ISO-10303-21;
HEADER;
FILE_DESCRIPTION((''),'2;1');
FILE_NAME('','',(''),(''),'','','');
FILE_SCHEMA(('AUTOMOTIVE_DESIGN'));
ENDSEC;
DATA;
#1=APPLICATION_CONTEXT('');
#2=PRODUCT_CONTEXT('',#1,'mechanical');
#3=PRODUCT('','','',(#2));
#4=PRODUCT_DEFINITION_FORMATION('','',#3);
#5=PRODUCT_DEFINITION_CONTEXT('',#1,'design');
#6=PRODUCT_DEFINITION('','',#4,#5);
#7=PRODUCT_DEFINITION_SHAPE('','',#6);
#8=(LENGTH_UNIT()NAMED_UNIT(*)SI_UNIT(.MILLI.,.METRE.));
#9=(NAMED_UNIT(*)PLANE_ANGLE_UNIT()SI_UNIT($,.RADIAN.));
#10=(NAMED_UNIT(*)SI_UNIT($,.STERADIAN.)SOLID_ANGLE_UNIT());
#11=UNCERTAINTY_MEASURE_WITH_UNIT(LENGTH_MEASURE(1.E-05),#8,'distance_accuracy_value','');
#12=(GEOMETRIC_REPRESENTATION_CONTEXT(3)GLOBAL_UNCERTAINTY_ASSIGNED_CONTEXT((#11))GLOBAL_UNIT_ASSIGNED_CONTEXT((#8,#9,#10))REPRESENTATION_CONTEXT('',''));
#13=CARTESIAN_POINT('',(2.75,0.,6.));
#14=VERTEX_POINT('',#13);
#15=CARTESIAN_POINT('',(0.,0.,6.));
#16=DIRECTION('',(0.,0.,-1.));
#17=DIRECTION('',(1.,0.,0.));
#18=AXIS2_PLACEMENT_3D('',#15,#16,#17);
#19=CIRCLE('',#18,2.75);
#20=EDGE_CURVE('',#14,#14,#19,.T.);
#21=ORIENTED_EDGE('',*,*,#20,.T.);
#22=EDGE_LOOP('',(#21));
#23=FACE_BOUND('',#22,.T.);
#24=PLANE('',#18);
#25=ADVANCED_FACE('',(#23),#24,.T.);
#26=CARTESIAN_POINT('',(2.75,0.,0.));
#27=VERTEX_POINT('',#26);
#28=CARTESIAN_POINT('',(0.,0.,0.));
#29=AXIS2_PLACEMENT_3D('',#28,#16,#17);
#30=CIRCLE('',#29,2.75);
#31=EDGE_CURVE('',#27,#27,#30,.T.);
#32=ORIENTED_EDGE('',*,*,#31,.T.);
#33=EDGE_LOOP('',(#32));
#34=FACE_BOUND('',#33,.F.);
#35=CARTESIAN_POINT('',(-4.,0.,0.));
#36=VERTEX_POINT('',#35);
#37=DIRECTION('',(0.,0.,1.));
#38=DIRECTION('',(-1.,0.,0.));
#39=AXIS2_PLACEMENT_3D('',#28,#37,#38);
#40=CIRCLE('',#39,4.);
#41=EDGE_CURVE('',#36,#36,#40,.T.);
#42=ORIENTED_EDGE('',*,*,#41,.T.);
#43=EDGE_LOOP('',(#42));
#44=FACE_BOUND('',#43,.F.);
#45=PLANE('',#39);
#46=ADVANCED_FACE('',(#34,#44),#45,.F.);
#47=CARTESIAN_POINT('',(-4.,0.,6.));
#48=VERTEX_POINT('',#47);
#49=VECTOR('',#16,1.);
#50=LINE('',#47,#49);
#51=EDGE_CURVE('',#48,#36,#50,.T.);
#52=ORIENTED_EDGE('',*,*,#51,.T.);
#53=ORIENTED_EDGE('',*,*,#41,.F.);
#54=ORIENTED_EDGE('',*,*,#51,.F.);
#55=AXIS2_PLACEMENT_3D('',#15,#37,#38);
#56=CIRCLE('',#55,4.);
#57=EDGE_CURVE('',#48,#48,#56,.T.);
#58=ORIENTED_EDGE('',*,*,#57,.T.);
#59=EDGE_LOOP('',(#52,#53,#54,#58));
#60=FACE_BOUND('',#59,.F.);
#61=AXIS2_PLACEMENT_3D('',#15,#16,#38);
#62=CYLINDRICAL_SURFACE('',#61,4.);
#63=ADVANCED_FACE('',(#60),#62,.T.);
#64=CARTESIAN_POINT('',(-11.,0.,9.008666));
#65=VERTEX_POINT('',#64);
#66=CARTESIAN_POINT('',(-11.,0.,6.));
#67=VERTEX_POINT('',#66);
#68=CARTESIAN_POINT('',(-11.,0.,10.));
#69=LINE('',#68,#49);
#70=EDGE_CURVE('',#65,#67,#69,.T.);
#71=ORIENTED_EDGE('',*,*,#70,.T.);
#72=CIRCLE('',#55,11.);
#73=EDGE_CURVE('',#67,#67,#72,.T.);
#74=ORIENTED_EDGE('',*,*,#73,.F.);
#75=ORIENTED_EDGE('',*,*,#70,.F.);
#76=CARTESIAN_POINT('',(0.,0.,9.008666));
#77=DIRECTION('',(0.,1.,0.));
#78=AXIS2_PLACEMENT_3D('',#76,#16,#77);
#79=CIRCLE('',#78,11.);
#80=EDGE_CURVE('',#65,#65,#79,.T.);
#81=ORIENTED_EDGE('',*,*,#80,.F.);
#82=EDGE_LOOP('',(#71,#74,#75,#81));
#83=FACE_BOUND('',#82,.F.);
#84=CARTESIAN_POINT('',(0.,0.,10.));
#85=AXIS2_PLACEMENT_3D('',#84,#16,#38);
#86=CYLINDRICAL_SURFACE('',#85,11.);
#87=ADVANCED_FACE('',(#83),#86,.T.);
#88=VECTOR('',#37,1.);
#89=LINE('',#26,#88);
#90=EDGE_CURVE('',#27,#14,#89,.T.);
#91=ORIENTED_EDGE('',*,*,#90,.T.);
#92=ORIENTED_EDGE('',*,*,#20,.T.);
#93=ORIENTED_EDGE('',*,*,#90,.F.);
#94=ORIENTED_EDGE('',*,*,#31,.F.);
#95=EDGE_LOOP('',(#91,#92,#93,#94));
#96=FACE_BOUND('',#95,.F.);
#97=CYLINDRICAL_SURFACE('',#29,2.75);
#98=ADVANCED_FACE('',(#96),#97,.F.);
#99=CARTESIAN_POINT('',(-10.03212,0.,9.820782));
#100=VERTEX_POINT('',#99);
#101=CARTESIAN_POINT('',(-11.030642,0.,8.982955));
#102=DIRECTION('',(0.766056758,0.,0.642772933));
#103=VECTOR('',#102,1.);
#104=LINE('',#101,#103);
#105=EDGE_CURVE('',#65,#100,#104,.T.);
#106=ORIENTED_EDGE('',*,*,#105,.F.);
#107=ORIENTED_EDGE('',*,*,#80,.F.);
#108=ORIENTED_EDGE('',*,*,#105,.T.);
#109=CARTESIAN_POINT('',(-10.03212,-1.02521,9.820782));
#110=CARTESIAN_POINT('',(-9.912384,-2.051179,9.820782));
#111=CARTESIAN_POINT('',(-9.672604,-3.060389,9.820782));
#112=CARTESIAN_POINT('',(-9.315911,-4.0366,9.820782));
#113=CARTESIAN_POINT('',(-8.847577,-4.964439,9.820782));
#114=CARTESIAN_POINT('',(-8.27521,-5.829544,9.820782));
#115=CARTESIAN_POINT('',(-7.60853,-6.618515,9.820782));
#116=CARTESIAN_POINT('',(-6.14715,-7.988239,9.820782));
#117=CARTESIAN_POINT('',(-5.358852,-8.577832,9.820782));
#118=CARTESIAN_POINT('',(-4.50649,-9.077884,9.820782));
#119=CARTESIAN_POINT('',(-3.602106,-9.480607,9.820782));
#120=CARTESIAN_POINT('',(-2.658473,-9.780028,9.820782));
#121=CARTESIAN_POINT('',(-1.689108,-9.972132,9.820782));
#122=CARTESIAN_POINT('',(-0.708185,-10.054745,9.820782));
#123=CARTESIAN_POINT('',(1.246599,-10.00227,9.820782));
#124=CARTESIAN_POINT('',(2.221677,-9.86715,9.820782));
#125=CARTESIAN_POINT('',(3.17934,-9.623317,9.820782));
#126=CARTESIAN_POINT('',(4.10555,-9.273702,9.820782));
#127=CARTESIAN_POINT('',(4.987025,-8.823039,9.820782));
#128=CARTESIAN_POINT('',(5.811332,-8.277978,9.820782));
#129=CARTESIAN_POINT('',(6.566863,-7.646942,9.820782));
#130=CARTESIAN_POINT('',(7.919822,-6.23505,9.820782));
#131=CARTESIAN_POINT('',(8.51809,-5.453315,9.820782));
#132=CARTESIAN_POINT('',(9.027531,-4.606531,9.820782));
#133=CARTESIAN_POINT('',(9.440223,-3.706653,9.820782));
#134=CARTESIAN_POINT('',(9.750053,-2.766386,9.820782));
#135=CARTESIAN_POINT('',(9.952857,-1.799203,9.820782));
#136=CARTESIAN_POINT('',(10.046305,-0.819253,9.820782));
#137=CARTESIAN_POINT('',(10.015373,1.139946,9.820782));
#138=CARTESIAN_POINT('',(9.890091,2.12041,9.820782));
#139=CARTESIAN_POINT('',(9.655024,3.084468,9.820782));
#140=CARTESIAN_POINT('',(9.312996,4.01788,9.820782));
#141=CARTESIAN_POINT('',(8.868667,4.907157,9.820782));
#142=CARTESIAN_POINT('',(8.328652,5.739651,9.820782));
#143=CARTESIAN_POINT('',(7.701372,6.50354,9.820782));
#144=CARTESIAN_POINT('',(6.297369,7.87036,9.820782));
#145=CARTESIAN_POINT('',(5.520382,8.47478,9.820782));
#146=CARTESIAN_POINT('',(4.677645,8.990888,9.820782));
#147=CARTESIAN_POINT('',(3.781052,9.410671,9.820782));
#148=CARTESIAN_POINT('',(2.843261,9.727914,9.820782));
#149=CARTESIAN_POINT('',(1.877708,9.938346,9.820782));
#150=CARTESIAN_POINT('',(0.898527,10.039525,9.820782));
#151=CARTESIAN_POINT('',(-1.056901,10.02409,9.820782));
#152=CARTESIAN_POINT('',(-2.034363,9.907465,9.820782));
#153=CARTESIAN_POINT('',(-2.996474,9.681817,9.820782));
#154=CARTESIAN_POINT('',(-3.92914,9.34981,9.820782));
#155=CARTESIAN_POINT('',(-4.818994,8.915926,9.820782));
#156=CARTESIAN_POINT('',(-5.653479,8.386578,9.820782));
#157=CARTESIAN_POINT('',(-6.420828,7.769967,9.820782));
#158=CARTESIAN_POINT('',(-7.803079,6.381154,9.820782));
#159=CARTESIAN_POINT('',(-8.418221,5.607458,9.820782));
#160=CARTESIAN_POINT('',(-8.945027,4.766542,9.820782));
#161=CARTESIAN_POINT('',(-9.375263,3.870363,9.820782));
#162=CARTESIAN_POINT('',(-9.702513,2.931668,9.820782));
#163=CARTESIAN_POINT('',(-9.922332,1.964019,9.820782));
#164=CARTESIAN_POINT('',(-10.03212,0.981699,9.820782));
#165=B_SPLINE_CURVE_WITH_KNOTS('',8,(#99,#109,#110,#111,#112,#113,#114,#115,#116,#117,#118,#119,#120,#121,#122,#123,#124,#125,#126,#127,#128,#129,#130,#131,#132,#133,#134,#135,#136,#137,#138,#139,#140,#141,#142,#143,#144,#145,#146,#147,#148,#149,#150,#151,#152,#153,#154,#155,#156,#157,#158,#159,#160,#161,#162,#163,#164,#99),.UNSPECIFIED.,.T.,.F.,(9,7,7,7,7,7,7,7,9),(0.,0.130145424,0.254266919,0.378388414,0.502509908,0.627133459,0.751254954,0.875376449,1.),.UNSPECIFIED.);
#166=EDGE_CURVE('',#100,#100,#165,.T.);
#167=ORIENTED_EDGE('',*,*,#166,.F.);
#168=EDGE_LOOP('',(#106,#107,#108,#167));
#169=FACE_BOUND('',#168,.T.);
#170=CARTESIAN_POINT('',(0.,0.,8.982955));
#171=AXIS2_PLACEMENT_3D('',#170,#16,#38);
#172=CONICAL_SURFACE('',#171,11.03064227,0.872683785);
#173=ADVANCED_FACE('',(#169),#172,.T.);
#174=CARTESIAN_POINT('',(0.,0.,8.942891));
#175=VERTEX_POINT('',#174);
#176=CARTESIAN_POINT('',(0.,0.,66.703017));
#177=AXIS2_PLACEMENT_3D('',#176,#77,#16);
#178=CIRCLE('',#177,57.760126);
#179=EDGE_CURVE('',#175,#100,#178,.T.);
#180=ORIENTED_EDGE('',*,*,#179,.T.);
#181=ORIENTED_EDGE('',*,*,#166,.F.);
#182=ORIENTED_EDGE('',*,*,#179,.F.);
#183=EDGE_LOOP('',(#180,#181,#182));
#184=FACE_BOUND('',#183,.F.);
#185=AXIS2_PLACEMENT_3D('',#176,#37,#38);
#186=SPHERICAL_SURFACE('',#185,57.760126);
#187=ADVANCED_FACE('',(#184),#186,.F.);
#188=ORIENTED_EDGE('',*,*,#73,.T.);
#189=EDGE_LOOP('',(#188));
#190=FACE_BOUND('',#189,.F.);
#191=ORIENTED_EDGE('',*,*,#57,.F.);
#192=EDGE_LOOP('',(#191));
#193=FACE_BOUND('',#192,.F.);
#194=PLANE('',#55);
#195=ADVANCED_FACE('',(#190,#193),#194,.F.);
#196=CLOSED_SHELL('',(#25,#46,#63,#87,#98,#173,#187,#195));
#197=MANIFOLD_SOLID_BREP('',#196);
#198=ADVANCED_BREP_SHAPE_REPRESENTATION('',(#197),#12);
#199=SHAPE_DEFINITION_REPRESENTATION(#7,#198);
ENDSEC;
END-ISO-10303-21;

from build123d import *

# Parameters (mm, degrees)
F3_R     = 2.75
F4_DEPTH = 6


# Not quite as in the source:
# - a fillet or chamfer that OpenCascade refuses, or shapes differently, is made with other operations: its cross-section is extruded or revolved along the edge and cut away or added


with BuildPart() as f1:
    # F0 (on Front) → F1 (revolve)
    with BuildSketch(Plane.XZ):
        with BuildLine():
            Line((-4, 6), (-4, 0))
            Line((-4, 0), (0, 0))
            Line((0, 0), (0, 8.9428911653))
            ThreePointArc((0, 8.9428911653), (-5.525338883, 9.2077757466), (-11, 10))
            Line((-11, 10), (-11, 6))
            Line((-11, 6), (-4, 6))
        make_face()
    revolve(axis=Axis((0, 0, 4.4714455826), (0, 0, 1)))

    # F2: chamfer of 1 on 1 edges, made by hand

    # F2_s1 → F2_t2 (revolve, cut)
    with BuildSketch(Plane.XZ):
        with BuildLine():
            Line((-11.0306422703, 8.9829547915), (-10.0014779949, 9.846492555))
            Line((-10.0014779949, 9.846492555), (-9.9980042766, 9.866188577))
            ThreePointArc((-9.9980042766, 9.866188577), (-10.5002890164, 9.9256794224), (-10.996191144, 10.0196339659))
            Line((-10.996191144, 10.0196339659), (-11.02, 10))
            ThreePointArc((-11.02, 10), (-11.02, 9.4914773958), (-11.0506422703, 8.9829547915))
            Line((-11.0506422703, 8.9829547915), (-11.0306422703, 8.9829547915))
        make_face()
    revolve(axis=Axis((0, 0, 10), (0, 0, 1)), mode=Mode.SUBTRACT)

    # F3 (on face) → F4 (cut)
    with BuildSketch(Plane(origin=(0, 0, 0), x_dir=(1, 0, 0), z_dir=(0, 0, -1))):
        Circle(F3_R)
    extrude(amount=-F4_DEPTH, mode=Mode.SUBTRACT)


solid = f1.part
